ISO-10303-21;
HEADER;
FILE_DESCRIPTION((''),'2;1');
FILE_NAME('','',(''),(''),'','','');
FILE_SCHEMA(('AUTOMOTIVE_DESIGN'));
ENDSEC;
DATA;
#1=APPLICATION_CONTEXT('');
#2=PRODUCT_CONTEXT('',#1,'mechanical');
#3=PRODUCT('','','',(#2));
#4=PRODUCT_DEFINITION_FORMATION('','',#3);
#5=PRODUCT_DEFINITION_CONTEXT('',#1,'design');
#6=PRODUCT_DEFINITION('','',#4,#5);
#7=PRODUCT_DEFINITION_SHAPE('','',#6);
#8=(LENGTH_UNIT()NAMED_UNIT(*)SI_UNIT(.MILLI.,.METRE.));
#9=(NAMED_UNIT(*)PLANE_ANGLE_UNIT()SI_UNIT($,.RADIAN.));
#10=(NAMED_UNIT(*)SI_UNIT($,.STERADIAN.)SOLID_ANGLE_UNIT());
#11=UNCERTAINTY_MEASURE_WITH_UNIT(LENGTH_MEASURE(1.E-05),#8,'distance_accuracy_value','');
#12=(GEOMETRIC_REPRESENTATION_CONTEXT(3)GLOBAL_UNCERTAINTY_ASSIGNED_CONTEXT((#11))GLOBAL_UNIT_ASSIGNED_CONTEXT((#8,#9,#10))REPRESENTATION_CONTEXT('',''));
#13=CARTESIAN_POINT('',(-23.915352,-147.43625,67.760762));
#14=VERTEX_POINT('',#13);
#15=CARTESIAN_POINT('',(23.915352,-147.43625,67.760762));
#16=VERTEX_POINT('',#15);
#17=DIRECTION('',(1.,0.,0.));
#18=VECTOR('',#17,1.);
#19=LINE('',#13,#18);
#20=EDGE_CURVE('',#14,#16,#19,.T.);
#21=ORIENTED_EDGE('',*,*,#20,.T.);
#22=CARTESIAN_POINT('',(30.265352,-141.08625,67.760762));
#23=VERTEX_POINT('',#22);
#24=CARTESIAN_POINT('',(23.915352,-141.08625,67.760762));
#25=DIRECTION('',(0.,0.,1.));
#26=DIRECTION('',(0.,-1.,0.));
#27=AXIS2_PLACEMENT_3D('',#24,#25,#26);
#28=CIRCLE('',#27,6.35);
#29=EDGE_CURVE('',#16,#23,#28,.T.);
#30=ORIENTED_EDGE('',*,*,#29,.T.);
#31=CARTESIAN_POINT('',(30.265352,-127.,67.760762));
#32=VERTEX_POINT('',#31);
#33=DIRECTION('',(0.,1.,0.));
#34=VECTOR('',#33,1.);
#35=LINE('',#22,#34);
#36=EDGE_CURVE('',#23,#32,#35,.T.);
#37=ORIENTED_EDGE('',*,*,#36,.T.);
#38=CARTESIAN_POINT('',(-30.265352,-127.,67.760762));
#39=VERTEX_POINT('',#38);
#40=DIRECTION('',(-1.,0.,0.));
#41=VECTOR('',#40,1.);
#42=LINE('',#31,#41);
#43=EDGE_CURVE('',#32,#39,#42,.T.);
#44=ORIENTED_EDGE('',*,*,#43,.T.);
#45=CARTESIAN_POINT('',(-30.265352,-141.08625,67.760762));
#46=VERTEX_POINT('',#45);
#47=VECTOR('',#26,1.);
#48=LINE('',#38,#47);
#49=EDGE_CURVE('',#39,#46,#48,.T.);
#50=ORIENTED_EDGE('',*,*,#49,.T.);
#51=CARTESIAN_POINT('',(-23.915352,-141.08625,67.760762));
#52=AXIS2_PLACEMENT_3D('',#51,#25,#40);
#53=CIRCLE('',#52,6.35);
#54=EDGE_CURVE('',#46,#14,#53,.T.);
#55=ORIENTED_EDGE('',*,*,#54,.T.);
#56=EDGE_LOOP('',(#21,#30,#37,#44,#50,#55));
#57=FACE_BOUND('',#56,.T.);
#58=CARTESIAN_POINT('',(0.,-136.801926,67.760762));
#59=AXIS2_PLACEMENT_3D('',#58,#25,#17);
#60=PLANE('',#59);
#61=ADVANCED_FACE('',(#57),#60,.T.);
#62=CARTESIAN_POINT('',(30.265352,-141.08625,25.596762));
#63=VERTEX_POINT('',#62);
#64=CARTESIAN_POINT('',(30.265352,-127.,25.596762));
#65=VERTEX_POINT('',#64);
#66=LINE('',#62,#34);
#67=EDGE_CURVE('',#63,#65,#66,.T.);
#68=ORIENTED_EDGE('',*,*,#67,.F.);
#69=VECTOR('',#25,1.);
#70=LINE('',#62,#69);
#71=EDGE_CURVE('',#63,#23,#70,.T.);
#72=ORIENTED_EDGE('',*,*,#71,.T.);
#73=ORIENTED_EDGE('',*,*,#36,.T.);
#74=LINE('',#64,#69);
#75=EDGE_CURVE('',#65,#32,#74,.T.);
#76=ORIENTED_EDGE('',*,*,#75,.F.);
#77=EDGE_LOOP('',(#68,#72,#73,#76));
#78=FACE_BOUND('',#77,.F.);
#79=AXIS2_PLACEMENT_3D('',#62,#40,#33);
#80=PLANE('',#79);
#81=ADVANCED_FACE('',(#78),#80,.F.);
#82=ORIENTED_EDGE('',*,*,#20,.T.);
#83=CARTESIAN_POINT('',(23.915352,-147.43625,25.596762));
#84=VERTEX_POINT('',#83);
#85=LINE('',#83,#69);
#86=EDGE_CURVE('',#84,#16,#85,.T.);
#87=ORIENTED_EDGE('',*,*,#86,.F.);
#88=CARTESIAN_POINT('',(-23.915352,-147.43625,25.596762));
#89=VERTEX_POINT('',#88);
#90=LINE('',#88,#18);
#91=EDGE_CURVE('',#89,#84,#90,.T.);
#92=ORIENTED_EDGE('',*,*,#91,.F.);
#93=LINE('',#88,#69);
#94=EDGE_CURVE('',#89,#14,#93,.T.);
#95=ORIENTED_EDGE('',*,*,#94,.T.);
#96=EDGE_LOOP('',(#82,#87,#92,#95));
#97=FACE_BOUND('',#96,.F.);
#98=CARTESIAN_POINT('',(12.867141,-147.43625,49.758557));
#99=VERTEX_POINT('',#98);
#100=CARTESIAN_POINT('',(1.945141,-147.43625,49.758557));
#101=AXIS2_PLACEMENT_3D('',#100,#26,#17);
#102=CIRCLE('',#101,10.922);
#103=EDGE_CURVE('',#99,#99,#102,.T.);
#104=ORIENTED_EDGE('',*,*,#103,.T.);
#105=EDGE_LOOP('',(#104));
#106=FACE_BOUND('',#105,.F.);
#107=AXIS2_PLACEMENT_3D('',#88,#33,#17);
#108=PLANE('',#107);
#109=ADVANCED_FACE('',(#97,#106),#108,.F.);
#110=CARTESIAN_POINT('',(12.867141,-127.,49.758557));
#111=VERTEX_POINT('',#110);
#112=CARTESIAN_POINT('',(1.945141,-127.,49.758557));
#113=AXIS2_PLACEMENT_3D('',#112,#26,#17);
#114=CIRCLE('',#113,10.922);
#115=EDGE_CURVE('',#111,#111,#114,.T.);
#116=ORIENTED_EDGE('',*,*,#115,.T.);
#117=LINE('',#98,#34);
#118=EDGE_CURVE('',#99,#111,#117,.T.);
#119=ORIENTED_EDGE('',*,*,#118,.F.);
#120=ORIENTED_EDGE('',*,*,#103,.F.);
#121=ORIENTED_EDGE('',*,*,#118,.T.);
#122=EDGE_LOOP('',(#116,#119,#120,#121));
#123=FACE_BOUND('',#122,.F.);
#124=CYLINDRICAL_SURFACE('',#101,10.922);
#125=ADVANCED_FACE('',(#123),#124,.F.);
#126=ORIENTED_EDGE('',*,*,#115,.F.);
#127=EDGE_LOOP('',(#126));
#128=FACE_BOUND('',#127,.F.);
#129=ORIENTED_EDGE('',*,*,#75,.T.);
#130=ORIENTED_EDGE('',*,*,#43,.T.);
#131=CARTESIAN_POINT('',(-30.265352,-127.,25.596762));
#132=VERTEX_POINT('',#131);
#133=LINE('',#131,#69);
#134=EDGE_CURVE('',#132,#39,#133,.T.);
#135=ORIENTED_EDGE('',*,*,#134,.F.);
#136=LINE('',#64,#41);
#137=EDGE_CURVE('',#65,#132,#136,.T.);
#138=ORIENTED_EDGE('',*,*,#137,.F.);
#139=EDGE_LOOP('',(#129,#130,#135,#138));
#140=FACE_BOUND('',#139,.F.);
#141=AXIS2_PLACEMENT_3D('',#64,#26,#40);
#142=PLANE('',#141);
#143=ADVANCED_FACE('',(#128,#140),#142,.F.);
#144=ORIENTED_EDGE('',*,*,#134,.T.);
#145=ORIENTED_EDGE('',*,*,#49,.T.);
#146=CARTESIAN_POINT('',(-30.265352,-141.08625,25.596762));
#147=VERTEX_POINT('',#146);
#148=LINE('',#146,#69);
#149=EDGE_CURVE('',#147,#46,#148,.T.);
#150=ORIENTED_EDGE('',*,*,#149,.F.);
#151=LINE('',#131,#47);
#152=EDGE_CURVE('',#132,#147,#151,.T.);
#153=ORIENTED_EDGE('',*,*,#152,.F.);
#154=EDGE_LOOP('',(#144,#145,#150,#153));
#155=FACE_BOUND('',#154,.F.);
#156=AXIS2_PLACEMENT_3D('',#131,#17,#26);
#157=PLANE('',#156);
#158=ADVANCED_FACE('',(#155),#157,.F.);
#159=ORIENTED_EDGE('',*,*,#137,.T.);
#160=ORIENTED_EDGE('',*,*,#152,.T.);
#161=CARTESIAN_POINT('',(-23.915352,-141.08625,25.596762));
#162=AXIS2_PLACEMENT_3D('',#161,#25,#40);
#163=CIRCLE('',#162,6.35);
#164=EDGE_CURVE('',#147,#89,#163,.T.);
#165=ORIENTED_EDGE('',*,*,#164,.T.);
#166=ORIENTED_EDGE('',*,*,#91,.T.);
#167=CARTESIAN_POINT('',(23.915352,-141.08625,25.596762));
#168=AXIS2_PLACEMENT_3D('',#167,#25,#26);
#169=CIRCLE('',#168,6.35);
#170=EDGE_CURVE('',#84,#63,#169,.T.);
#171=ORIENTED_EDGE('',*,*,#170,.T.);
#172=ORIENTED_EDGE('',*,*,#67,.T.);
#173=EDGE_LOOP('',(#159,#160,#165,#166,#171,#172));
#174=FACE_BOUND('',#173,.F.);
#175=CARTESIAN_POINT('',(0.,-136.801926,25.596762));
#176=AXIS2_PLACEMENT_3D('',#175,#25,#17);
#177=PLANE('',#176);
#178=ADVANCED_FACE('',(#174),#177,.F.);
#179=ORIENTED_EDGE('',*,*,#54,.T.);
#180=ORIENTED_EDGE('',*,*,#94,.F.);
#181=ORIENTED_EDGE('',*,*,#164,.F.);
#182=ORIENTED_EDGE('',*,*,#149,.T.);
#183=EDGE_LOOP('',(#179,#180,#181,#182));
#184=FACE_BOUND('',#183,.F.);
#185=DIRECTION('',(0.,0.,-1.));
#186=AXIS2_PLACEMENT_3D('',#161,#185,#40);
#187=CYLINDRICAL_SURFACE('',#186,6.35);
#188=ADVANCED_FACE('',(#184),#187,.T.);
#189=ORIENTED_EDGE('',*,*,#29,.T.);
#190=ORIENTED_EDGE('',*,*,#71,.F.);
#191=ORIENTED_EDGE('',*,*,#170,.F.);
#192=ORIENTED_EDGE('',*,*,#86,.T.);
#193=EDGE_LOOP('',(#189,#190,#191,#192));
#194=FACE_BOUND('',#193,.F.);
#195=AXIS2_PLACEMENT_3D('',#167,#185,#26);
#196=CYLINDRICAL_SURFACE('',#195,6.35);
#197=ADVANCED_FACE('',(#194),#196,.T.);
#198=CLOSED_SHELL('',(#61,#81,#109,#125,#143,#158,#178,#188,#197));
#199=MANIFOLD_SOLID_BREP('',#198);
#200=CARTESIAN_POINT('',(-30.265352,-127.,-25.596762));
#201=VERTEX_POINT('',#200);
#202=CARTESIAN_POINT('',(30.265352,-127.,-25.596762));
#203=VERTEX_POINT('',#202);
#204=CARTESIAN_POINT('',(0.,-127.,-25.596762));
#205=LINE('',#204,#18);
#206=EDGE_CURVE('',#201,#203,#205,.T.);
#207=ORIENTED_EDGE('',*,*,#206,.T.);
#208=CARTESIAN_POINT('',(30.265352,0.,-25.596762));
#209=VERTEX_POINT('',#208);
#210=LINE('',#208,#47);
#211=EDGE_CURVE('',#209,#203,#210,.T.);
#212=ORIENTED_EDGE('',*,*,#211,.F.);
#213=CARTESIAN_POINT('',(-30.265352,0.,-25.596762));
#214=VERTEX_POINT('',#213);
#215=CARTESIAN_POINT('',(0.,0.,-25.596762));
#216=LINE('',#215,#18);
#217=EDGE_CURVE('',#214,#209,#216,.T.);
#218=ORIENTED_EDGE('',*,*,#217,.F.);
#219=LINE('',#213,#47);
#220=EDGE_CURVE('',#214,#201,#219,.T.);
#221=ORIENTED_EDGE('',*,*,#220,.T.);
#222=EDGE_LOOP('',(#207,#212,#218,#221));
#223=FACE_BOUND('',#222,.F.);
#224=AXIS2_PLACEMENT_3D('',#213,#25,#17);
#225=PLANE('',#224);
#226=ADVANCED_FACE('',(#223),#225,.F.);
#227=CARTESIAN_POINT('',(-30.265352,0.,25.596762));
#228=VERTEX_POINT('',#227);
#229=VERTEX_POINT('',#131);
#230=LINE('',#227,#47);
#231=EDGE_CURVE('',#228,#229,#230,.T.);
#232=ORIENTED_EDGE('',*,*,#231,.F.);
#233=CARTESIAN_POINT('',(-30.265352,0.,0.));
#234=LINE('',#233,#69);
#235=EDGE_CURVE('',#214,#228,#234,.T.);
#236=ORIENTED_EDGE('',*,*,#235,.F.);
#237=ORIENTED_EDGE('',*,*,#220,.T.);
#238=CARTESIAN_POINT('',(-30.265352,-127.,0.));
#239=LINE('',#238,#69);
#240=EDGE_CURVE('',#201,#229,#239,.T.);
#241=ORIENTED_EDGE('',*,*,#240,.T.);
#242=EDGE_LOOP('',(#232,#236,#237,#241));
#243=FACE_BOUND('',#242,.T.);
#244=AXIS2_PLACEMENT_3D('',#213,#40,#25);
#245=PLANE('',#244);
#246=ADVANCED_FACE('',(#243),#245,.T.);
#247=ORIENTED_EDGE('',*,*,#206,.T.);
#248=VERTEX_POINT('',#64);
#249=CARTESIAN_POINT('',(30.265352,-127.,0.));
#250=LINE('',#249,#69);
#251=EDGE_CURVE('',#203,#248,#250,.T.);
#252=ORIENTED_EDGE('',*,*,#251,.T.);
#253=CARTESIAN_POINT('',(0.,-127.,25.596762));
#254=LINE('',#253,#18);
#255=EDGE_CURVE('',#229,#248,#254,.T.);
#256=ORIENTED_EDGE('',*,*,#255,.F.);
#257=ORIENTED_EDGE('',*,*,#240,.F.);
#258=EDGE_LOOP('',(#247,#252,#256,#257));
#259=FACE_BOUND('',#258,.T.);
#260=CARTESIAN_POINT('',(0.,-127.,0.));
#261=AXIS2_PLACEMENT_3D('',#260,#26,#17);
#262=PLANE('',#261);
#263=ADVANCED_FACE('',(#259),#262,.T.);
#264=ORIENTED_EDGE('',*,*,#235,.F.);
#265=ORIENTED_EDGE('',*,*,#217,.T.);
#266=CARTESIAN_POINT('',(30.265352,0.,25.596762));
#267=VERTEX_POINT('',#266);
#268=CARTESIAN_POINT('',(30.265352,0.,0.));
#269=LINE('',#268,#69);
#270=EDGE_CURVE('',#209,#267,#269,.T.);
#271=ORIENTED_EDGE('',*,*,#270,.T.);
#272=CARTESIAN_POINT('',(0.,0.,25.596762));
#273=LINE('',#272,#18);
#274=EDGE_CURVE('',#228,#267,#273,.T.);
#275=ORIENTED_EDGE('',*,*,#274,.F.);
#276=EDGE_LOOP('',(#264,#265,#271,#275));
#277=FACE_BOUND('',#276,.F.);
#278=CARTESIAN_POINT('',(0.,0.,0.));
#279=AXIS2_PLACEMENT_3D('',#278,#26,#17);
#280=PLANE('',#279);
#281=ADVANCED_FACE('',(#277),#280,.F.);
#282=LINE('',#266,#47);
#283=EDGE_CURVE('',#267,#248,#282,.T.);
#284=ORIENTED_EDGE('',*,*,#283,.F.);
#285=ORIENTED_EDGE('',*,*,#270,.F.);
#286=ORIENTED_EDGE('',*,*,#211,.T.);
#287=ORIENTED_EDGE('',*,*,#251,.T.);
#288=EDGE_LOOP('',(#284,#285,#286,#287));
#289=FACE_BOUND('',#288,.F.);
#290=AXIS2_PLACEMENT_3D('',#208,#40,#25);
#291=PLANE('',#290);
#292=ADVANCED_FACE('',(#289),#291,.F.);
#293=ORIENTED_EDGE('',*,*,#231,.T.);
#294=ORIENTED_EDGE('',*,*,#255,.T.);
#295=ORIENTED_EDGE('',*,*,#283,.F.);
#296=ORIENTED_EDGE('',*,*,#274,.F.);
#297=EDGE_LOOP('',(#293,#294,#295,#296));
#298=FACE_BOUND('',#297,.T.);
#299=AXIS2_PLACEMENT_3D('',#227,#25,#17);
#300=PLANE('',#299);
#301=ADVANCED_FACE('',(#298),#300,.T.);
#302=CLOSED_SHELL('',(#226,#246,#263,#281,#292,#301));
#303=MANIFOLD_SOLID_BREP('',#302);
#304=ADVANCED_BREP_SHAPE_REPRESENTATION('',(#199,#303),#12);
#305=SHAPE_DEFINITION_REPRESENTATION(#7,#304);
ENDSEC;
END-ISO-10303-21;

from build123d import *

# Parameters (mm, degrees)
F0_W     = 60.5307035148
F0_H     = 51.193524152
F1_DEPTH = 127
F3_DEPTH = 42.164
F4_R     = 10.922
F5_DEPTH = 25.4


# Not quite as in the source:
# - the program builds the solid bodies; features that only make, move or delete a surface that nothing else refers to are left out


with BuildPart() as f1:
    # F0 (on Front) → F1 (new body)
    with BuildSketch(Plane.XZ):
        Rectangle(F0_W, F0_H)
    extrude(amount=F1_DEPTH)


with BuildPart() as f3:
    # F2 (on face) → F3 (new body)
    with BuildSketch(Plane.XY.offset(25.596762076)):
        with BuildLine():
            Line((30.2653517574, -127), (-30.2653517574, -127))
            Line((-30.2653517574, -127), (-30.2653517574, -141.0862502229))
            ThreePointArc((-30.2653517574, -141.0862502229), (-28.4054798179, -145.5763782835), (-23.9153517574, -147.4362502229))
            Line((-23.9153517574, -147.4362502229), (23.9153517574, -147.4362502229))
            ThreePointArc((23.9153517574, -147.4362502229), (28.4054798179, -145.5763782835), (30.2653517574, -141.0862502229))
            Line((30.2653517574, -141.0862502229), (30.2653517574, -127))
        make_face()
    extrude(amount=F3_DEPTH)

    # F4 (on face) → F5 (cut)
    with BuildSketch(Plane.XZ.offset(147.4362502229)):
        with Locations((1.9451410044, 49.7585572302)):
            Circle(F4_R)
    extrude(amount=-F5_DEPTH, mode=Mode.SUBTRACT)


solid = Compound([f1.part, f3.part])
